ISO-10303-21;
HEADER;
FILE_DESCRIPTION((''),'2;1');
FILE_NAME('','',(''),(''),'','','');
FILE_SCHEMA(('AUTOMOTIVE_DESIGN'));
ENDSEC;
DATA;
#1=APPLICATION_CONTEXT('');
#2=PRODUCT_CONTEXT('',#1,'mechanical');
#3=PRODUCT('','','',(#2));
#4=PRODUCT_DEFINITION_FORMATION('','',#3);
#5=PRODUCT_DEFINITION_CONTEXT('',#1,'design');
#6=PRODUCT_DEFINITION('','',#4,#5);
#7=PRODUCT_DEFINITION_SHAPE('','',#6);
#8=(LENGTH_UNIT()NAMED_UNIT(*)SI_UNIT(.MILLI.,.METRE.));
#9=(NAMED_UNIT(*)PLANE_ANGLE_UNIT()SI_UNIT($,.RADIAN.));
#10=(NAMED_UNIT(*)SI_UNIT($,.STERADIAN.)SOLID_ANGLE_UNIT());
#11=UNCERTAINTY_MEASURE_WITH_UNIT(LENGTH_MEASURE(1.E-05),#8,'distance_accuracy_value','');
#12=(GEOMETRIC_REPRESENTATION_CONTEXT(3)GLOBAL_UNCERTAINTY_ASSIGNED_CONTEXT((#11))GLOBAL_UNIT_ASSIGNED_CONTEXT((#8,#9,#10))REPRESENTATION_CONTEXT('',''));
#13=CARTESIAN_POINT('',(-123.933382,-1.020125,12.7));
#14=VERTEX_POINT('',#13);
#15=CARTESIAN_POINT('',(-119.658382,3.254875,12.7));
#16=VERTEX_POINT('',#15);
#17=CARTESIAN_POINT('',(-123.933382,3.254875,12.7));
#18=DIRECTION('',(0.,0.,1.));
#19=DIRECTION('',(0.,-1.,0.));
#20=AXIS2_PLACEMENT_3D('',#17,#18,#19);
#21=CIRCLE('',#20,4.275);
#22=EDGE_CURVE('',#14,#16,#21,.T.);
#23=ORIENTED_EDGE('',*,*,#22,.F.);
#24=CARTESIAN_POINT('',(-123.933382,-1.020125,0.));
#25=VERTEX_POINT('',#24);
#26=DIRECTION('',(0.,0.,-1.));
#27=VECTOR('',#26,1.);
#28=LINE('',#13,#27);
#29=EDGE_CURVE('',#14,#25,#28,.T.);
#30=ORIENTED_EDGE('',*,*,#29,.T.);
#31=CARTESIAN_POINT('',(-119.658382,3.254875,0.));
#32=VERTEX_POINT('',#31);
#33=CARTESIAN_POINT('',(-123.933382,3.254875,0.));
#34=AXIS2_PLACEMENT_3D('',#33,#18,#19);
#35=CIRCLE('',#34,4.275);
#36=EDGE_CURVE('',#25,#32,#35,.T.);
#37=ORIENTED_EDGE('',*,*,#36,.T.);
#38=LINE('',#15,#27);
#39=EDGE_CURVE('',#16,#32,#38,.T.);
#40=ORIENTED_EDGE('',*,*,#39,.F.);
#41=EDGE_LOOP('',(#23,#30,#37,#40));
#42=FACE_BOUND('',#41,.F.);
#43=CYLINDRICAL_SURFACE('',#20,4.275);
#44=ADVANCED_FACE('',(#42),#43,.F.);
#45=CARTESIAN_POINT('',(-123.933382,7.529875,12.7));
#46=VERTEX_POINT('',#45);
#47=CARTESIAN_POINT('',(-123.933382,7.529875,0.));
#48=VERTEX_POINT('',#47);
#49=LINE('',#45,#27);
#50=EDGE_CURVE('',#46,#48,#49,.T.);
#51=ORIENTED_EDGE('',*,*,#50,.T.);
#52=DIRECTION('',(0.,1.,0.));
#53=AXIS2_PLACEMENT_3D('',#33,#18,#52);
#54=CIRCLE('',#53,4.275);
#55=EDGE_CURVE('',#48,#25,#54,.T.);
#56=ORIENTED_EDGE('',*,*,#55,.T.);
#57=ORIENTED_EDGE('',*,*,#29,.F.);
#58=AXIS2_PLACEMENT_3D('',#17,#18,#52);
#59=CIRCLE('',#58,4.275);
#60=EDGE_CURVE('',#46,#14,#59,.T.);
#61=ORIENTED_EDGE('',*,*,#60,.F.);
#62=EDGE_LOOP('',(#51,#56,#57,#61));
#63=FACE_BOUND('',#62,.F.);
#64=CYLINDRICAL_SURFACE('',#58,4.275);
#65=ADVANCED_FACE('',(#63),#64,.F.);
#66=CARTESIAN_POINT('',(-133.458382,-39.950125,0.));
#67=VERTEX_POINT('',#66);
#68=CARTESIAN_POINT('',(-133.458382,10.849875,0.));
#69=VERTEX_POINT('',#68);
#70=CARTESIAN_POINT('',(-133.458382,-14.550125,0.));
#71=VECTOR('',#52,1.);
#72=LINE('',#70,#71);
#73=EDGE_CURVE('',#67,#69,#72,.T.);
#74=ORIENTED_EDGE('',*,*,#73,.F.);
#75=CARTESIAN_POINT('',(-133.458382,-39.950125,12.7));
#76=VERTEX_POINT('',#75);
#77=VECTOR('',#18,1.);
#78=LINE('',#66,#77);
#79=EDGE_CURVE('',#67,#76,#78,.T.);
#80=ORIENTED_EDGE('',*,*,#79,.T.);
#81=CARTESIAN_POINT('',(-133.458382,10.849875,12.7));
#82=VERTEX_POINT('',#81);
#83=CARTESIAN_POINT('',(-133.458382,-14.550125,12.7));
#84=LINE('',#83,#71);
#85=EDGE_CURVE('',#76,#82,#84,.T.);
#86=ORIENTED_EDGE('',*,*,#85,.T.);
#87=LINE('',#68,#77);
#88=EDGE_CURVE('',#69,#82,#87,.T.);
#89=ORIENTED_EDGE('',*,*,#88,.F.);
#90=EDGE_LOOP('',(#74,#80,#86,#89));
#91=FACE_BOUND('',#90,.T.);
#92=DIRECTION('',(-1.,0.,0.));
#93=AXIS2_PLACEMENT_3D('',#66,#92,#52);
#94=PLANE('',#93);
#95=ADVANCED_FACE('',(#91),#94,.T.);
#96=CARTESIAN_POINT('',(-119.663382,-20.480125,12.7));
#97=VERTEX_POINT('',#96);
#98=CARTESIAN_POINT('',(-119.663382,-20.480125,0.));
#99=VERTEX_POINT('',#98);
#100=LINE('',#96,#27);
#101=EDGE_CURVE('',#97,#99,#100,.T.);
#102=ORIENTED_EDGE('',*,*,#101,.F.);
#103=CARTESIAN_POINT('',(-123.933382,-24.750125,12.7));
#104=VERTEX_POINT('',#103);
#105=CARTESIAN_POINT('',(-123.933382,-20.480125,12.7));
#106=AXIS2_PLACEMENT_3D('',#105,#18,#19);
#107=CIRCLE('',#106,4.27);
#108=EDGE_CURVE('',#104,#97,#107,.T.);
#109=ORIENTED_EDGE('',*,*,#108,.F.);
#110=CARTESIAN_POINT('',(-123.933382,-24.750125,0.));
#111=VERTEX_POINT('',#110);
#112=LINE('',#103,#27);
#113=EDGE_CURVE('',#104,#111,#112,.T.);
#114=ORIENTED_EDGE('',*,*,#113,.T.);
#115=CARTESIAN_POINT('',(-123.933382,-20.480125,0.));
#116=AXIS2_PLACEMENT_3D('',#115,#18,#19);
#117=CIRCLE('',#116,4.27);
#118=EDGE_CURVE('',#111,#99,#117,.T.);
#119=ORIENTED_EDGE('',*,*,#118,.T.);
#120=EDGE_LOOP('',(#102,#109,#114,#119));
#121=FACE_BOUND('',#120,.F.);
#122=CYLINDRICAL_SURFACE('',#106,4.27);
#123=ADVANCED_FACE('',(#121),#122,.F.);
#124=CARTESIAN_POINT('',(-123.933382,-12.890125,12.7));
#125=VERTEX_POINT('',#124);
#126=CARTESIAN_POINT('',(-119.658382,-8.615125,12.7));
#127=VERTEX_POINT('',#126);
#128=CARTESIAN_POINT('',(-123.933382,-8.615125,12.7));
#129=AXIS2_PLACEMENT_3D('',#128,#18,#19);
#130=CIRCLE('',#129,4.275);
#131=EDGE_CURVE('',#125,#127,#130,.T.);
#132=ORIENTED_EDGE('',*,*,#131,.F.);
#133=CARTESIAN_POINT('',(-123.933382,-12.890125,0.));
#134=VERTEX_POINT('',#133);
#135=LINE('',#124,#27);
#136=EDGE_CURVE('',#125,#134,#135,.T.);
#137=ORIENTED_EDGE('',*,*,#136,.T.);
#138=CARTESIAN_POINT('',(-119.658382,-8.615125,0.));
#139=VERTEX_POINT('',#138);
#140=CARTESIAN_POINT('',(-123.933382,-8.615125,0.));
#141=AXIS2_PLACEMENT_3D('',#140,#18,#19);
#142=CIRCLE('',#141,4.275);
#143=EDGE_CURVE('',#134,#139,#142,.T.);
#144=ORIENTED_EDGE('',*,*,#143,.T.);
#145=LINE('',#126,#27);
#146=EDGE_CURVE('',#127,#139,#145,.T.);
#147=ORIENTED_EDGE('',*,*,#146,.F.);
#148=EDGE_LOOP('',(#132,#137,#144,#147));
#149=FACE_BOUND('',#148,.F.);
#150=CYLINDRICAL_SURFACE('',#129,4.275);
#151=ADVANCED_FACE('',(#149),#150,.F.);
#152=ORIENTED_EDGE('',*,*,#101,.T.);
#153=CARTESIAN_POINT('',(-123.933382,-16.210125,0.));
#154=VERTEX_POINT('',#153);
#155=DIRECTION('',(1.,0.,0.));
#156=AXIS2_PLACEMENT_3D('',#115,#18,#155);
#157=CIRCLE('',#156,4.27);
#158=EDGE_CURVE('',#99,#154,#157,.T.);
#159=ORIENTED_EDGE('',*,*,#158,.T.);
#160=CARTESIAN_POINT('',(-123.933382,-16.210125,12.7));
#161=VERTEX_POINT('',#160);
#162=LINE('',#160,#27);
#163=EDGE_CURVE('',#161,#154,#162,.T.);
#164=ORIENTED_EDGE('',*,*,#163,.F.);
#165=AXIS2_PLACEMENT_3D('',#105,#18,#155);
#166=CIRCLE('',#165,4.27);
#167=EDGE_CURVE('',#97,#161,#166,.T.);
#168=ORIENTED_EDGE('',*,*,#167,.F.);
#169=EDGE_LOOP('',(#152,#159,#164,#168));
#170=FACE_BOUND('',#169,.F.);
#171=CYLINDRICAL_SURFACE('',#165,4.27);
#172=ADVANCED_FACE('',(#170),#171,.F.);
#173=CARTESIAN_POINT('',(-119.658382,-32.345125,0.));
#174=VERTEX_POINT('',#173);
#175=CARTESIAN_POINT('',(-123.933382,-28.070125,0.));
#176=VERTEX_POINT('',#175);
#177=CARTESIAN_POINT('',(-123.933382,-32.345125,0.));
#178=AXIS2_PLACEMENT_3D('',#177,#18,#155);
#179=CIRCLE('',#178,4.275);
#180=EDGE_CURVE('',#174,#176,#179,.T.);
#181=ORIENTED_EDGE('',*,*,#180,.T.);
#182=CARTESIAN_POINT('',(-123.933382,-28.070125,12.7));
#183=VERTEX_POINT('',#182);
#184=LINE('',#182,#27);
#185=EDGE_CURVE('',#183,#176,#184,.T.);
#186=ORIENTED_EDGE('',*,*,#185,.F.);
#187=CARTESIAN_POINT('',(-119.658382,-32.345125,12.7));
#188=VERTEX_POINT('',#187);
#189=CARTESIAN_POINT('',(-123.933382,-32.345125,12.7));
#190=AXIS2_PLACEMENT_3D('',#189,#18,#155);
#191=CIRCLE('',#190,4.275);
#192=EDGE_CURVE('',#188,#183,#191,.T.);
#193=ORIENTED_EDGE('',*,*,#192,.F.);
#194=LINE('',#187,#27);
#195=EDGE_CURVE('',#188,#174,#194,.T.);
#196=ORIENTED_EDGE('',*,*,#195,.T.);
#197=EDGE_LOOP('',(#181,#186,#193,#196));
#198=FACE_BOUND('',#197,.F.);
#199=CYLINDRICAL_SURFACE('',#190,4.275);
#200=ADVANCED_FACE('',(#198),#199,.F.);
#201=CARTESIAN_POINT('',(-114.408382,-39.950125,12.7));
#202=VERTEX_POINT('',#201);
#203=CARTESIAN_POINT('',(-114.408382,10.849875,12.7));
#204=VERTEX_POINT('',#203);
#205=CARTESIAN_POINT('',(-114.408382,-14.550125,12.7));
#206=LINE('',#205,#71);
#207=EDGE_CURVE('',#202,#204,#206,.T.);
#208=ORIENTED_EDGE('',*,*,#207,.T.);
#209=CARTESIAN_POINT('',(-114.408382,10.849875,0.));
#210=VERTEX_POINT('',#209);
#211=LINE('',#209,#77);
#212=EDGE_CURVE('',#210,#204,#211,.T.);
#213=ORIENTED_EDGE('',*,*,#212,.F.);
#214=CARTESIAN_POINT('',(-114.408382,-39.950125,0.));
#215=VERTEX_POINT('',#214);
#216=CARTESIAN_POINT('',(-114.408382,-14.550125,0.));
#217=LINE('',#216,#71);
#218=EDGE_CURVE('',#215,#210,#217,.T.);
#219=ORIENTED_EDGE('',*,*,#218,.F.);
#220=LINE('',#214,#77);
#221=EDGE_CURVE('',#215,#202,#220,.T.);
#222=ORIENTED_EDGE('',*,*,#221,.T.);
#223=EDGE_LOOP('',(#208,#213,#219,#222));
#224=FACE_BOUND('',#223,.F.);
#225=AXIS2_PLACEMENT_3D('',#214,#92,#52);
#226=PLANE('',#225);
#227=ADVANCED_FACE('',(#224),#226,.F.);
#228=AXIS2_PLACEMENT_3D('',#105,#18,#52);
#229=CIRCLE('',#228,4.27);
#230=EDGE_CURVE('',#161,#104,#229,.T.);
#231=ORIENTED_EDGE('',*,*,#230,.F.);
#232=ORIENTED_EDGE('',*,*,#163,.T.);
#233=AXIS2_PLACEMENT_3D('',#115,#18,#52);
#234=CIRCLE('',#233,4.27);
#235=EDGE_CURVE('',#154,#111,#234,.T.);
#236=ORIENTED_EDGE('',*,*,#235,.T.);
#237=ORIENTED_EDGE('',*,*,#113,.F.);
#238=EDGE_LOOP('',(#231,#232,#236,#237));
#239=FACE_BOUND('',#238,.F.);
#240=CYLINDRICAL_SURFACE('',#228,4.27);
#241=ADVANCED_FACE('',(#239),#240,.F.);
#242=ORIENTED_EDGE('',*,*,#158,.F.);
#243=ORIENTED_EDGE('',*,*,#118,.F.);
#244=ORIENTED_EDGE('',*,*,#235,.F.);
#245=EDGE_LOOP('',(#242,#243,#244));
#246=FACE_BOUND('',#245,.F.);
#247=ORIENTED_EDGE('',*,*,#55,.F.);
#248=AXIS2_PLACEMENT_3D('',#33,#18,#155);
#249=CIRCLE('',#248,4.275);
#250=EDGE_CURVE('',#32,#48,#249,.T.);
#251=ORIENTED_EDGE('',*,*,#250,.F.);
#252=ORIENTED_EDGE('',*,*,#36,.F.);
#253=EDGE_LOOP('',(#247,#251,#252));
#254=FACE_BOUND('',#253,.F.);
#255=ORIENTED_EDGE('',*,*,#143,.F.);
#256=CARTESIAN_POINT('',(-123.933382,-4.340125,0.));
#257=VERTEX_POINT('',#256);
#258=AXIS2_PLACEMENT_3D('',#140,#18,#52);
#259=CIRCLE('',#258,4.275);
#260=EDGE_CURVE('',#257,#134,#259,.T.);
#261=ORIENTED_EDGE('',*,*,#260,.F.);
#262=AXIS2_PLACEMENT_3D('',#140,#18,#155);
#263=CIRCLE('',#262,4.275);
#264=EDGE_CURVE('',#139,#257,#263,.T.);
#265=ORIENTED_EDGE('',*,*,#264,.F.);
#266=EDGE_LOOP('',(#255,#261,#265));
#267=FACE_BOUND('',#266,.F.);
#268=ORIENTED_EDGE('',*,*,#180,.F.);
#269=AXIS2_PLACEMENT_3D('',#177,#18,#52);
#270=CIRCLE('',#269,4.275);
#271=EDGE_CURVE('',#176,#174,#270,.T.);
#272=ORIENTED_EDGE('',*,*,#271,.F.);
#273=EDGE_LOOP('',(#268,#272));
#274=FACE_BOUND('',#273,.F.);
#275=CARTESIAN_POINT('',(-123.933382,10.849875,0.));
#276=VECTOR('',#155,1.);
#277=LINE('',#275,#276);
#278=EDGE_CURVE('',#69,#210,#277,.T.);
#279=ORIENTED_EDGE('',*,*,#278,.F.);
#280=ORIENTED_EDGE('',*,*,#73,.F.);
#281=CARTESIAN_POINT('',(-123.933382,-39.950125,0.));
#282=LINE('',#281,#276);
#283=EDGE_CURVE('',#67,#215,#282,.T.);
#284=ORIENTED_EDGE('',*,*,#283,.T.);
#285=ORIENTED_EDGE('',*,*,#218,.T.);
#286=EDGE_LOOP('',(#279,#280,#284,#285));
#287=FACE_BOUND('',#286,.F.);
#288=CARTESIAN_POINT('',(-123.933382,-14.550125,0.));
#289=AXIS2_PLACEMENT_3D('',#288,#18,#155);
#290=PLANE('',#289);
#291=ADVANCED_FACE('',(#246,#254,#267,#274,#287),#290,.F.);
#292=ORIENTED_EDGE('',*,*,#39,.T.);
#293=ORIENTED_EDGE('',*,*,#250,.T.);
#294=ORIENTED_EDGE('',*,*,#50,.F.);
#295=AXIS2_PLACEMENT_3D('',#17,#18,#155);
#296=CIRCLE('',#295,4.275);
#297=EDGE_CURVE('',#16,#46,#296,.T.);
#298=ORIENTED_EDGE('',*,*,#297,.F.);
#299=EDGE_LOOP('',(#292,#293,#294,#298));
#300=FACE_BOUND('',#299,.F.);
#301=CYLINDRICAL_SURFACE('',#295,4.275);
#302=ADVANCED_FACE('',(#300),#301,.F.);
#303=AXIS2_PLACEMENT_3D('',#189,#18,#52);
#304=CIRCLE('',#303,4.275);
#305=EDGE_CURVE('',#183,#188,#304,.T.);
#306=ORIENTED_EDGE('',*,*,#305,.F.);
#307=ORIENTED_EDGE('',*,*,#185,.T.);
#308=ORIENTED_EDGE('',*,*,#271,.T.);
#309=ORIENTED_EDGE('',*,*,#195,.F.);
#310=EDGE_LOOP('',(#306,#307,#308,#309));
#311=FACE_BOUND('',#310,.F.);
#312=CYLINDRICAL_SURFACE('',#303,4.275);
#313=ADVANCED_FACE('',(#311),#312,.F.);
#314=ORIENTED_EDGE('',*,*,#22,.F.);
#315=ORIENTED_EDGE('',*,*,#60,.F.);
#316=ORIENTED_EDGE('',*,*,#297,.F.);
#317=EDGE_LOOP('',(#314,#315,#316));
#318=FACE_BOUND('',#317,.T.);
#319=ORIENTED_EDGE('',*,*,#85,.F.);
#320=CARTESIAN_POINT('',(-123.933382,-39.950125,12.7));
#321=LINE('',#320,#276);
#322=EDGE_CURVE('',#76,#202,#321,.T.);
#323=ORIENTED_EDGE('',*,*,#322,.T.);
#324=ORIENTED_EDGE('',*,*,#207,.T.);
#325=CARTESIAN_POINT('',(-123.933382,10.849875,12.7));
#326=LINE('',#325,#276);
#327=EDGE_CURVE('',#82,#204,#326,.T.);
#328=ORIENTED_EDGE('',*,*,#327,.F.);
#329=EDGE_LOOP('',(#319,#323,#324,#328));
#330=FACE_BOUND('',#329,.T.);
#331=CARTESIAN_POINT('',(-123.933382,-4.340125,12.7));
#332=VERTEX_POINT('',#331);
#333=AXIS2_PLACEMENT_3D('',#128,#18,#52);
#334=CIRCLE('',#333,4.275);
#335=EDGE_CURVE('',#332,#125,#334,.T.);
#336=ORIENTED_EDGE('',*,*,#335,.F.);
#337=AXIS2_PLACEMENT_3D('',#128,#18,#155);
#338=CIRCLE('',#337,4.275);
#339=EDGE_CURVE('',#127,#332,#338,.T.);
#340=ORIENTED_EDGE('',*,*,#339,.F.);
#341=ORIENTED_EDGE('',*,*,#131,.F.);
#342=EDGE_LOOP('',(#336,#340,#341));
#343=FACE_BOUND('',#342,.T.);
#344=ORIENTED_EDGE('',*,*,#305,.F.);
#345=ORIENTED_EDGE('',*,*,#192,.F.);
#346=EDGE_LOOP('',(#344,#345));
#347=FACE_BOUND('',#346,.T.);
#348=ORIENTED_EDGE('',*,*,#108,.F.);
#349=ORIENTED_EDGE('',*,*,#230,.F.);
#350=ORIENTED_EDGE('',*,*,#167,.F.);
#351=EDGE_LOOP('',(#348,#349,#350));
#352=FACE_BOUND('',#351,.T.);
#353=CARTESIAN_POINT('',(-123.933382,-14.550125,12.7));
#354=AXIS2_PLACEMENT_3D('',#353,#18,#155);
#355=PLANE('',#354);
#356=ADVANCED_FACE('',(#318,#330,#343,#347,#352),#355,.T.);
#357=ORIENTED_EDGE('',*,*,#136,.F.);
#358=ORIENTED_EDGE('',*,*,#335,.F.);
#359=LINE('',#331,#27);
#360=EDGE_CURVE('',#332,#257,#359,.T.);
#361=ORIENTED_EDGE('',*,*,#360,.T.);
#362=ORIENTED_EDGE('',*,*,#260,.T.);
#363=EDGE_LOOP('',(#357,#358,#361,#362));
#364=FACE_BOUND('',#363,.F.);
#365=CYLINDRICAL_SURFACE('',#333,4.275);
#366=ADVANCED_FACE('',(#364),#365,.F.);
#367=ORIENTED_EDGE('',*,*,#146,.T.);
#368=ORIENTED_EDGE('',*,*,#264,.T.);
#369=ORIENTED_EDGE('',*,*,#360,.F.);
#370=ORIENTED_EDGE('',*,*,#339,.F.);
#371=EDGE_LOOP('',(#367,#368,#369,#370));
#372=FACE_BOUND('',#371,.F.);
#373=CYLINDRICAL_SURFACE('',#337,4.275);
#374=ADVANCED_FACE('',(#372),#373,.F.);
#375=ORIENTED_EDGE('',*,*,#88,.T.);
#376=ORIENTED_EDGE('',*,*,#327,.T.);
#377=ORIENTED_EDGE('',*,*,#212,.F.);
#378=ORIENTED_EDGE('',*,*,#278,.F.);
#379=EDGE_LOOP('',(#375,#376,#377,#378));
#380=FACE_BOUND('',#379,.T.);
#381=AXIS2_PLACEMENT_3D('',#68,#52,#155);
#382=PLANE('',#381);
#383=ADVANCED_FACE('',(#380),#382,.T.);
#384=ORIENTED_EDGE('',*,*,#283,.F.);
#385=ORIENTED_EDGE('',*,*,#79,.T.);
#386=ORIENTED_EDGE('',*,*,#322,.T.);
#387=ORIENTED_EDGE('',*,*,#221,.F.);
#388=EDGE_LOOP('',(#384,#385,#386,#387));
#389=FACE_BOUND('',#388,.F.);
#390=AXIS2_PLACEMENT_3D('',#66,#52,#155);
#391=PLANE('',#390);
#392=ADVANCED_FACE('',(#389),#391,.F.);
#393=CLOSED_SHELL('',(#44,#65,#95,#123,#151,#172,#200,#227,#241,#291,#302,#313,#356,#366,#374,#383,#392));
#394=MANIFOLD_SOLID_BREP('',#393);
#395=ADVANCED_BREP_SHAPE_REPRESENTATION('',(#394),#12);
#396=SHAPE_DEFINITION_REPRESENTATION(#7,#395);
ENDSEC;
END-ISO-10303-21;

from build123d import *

# Parameters (mm, degrees)
F0_W     = 19.05
F0_H     = 50.8
F1_DEPTH = 12.7
F3_DEPTH = 25


with BuildPart() as f1:
    # F0 (on Top) → F1 (new body)
    with BuildSketch(Plane.XY):
        with Locations((-123.9333823323, -14.550125433)):
            Rectangle(F0_W, F0_H)
    extrude(amount=F1_DEPTH)

    # F2 (on face) → F3 (cut)
    with BuildSketch(Plane.XY.offset(12.7)):
        with BuildLine():
            ThreePointArc((-119.6583823323, -32.345125433), (-120.9105008428, -29.3222439434), (-123.9333823323, -28.070125433))
            ThreePointArc((-123.9333823323, -28.070125433), (-126.9562638219, -35.3680069226), (-119.6583823323, -32.345125433))
        make_face()
        with BuildLine():
            ThreePointArc((-119.6633823323, -20.480125433), (-120.9140363767, -17.4607794774), (-123.9333823323, -16.210125433))
            ThreePointArc((-123.9333823323, -16.210125433), (-128.2033823323, -20.480125433), (-123.9333823323, -24.750125433))
            ThreePointArc((-123.9333823323, -24.750125433), (-120.9140363767, -23.4994713887), (-119.6633823323, -20.480125433))
        make_face()
        with BuildLine():
            ThreePointArc((-119.6583823323, -8.615125433), (-120.9105008428, -5.5922439434), (-123.9333823323, -4.340125433))
            ThreePointArc((-123.9333823323, -4.340125433), (-128.2083823323, -8.615125433), (-123.9333823323, -12.890125433))
            ThreePointArc((-123.9333823323, -12.890125433), (-120.9105008428, -11.6380069226), (-119.6583823323, -8.615125433))
        make_face()
        with BuildLine():
            ThreePointArc((-119.6583823323, 3.254874567), (-120.9105008428, 6.2777560566), (-123.9333823323, 7.529874567))
            ThreePointArc((-123.9333823323, 7.529874567), (-128.2083823323, 3.254874567), (-123.9333823323, -1.020125433))
            ThreePointArc((-123.9333823323, -1.020125433), (-120.9105008428, 0.2319930774), (-119.6583823323, 3.254874567))
        make_face()
    extrude(amount=-F3_DEPTH, mode=Mode.SUBTRACT)


solid = f1.part
